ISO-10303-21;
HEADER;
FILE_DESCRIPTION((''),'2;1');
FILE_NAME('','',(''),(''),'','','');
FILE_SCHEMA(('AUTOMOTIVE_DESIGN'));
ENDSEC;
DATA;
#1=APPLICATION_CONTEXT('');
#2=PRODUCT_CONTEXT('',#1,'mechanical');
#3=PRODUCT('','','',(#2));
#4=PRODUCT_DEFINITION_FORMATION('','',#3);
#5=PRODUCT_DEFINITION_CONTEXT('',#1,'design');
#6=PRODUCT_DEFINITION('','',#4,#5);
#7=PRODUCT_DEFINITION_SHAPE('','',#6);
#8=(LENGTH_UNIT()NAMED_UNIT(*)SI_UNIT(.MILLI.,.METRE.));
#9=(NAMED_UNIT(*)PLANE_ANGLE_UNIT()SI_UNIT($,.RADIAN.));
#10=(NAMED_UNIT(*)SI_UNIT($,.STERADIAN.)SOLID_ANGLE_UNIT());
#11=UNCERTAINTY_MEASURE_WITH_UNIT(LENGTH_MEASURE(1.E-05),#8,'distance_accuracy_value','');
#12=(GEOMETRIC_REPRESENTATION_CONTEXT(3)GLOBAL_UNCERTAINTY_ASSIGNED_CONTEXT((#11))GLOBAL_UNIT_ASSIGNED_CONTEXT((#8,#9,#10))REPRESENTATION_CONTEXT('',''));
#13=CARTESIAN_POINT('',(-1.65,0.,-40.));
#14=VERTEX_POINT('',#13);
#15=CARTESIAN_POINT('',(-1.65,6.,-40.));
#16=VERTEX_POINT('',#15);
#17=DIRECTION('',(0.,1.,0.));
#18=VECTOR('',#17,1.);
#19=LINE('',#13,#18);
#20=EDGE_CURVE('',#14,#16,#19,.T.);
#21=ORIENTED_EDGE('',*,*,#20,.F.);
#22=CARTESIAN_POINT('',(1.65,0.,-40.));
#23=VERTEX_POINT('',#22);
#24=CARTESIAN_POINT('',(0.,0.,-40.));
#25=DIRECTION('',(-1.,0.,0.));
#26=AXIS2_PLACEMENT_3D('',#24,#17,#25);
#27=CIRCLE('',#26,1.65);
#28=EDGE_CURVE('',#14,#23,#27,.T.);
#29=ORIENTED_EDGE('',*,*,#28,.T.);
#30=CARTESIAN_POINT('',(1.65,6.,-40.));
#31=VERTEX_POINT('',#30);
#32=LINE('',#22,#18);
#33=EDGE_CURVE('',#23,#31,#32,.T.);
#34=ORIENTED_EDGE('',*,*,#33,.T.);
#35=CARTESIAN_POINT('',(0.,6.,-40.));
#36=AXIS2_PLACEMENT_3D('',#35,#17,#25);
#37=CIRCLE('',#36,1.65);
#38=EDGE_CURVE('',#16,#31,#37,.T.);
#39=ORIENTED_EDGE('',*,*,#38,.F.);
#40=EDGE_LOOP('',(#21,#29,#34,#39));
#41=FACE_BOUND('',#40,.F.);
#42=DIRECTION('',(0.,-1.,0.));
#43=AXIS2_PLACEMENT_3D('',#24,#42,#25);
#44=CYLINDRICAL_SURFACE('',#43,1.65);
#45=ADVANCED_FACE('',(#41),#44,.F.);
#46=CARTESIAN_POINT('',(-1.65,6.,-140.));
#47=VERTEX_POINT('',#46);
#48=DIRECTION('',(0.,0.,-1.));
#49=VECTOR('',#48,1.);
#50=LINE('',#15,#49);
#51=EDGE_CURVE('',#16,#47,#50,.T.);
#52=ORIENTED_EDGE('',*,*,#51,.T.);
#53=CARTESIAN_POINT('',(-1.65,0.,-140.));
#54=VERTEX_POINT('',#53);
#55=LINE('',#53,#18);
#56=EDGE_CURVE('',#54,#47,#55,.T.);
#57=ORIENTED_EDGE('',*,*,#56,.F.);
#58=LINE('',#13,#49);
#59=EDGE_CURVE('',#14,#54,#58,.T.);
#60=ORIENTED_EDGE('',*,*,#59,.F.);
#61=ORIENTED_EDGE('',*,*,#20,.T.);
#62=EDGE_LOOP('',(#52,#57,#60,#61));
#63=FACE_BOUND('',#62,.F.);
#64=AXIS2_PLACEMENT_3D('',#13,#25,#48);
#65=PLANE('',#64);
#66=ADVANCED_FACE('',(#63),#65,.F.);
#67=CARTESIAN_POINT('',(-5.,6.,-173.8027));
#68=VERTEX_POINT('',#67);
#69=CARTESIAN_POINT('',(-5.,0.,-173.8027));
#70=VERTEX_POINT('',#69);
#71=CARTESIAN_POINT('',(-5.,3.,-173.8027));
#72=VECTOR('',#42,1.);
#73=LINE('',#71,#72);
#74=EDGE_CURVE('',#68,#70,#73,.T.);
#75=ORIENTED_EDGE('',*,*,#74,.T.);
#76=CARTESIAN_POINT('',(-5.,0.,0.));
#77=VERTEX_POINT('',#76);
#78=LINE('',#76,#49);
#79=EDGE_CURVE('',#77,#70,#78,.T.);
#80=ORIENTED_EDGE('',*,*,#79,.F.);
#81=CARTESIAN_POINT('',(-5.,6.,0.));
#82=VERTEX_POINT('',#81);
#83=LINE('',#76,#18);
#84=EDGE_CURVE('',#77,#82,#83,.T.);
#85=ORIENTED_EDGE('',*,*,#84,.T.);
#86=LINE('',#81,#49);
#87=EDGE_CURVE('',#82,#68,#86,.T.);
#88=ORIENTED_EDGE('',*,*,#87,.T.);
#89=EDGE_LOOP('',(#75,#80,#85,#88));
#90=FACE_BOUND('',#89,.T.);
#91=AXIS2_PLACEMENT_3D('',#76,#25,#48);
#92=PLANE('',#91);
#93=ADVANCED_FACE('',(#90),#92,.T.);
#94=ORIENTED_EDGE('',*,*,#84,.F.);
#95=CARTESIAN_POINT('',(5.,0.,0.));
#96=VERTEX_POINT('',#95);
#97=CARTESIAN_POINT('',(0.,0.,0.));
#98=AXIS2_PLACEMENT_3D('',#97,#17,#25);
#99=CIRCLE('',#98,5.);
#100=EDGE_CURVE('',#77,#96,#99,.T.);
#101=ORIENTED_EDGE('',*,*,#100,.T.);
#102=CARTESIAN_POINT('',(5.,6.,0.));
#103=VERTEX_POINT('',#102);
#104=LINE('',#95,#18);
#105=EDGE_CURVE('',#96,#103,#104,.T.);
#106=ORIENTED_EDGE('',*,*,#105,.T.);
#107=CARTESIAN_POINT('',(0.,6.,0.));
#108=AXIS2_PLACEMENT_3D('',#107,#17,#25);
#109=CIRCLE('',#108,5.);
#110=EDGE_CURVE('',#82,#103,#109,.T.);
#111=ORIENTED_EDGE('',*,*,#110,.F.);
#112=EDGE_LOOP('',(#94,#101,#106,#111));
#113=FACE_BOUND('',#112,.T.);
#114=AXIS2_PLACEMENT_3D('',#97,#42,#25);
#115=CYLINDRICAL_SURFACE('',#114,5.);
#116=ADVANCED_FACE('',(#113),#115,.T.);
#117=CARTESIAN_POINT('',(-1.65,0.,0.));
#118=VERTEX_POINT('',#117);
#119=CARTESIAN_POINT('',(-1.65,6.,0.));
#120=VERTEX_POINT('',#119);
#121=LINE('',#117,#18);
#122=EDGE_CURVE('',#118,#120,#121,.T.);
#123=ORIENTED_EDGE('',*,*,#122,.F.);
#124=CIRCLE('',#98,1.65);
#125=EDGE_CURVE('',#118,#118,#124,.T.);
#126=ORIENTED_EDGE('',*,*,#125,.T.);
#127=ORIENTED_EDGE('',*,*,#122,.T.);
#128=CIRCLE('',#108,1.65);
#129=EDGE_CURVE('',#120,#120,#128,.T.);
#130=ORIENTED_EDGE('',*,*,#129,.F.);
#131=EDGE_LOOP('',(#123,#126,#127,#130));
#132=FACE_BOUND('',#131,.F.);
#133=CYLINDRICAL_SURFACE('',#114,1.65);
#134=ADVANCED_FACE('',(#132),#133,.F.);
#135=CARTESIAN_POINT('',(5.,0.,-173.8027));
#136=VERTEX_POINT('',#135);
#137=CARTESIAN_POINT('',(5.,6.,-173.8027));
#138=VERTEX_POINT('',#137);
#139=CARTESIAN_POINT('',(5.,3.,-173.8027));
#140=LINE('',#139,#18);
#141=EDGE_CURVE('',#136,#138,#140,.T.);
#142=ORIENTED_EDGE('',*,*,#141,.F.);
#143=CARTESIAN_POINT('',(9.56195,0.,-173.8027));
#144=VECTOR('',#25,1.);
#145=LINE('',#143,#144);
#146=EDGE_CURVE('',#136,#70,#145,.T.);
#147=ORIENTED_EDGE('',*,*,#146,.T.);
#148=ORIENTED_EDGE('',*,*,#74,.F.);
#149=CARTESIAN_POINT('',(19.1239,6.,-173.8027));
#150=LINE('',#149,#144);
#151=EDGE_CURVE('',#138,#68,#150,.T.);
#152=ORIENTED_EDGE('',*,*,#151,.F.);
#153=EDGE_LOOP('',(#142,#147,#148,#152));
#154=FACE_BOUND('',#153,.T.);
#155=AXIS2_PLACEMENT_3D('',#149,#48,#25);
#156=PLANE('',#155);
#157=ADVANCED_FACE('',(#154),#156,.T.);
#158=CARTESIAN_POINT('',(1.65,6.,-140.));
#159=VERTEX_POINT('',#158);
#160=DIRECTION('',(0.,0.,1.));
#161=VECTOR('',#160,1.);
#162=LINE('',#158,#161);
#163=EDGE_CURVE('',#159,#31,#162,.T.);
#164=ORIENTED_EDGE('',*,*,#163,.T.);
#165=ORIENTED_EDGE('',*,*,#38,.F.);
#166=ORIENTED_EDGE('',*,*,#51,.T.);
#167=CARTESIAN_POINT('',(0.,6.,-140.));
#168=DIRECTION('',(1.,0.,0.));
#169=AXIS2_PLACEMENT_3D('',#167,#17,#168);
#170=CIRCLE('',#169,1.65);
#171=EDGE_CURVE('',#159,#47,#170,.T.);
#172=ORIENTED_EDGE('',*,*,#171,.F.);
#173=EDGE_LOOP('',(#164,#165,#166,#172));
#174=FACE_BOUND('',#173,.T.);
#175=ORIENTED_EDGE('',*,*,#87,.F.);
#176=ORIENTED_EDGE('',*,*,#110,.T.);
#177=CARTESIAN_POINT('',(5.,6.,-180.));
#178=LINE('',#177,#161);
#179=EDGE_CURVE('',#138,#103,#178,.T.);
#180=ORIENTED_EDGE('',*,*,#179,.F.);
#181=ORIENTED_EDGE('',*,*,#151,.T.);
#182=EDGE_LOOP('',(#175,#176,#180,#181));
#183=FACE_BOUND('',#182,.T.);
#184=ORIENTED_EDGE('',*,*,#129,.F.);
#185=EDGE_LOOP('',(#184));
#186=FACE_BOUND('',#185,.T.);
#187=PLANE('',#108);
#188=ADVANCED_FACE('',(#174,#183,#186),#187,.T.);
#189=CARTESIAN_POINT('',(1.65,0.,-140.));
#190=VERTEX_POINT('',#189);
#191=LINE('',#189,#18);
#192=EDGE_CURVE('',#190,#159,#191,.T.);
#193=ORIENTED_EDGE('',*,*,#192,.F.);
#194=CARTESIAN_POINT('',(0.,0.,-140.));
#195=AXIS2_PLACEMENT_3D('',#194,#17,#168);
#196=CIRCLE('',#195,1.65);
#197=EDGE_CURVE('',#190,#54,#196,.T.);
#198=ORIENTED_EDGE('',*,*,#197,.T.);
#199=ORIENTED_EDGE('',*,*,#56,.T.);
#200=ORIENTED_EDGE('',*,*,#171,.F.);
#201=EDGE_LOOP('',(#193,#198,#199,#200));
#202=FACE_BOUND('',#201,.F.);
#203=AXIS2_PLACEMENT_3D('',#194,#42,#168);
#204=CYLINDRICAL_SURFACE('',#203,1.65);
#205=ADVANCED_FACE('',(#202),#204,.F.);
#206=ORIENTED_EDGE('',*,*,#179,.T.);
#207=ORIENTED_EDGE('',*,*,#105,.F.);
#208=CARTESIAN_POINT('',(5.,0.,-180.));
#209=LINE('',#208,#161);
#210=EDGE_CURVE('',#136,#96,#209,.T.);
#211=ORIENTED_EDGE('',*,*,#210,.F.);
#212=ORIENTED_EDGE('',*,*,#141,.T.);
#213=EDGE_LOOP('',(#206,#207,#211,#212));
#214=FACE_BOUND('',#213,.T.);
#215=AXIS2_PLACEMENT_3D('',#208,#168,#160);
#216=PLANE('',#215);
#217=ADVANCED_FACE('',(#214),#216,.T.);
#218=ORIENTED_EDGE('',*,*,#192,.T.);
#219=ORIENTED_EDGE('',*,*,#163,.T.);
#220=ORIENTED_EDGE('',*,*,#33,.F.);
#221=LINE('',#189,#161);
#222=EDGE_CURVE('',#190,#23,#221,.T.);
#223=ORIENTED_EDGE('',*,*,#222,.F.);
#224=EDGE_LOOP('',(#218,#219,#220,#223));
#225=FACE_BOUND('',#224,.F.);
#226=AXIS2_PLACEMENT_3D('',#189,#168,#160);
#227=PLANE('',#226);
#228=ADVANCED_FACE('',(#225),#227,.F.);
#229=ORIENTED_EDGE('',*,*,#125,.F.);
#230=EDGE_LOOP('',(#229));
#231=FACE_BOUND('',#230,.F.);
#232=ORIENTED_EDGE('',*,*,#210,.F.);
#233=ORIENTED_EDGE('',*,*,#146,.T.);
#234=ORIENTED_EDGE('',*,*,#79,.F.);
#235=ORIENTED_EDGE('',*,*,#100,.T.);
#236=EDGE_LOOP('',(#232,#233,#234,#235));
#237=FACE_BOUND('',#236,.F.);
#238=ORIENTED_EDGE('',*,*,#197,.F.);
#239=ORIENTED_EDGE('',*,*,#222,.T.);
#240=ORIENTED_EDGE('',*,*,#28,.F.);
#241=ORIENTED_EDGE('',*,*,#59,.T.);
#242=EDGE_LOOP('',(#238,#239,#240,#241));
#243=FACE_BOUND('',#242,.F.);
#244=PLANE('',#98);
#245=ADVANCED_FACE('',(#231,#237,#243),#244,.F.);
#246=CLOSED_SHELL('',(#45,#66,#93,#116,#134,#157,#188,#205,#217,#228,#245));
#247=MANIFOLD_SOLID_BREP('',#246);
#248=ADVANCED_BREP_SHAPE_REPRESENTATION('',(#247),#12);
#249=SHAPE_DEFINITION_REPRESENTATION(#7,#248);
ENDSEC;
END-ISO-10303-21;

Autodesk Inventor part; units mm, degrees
ref_plane "YZ Plane" through (0, 0, 0) normal (1, 0, 0) x (0, 1, 0)
ref_plane "XZ Plane" through (0, 0, 0) normal (0, 1, 0) x (-1, 0, 0)
ref_plane "XY Plane" through (0, 0, 0) normal (0, 0, 1) x (1, 0, 0)
sketch "Sketch1" plane through (0, 0, 0) normal (0, 1, 0) x (-1, 0, 0)
  line L0 (0, 0) -> (0, -180) construction
  line L1 (5, 0) -> (5, -180)
  line L2 (-5, -180) -> (-5, 0)
  arc A0 (5, 0) -> (-5, 0) centre (0, 0) ccw
  arc A1 (-5, -180) -> (5, -180) centre (0, -180) ccw
  circle A2 centre (0, 0) radius 1.65
  line L3 (0, -40) -> (0, -140) construction
  line L4 (1.65, -40) -> (1.65, -140)
  line L5 (-1.65, -140) -> (-1.65, -40)
  arc A3 (1.65, -40) -> (-1.65, -40) centre (0, -40) ccw
  arc A4 (-1.65, -140) -> (1.65, -140) centre (0, -140) ccw
  point P0 (0, -90)
  point P1 (0, -90)
  dimension "d0" = 180
  dimension "d1" = 10
  dimension "d2" = 3.3
  dimension "d3" = 40
  dimension "d5" = 140
  dimension "d6" = 3.3
extrude "Extrusion1" add sketch "Sketch1" along normal blind 6
sketch "Sketch2" plane through (5, 0, 0) normal (1, 0, 0) x (0, 0, -1)
  line L0 (180, 0) -> (180, 6) projected
  line L1 (0, 0) -> (180, 0) projected
  line L2 (180, 0) -> (180, 6) projected
  line L3 (0, 6) -> (180, 6) projected
  line L4 (0, 0) -> (0, 6) projected
  line L5 (180, 0) -> (180, 0) projected
  line L6 (180, 0) -> (180, 6) projected
  line L7 (180, 6) -> (180, 6) projected
  line L8 (180, 0) -> (180, 6) projected
  line L9 (180, 0) -> (0, 0) projected
  arc A0 (498.004, -84) -> (180, 0) centre (180, -643.9437) ccw
  line L10 (180, 6) -> (0, 6) projected
  arc A1 (498.004, -78) -> (180, 6) centre (180, -637.9437) ccw
  line L11 (498.004, -78) -> (498.004, -84)
  line L12 (0, 0) -> (180, 0) projected
  dimension "d9" = 6
  dimension "d10" = 498.004
  dimension "d11" = 90
extrude "Extrusion2" add sketch "Sketch2" against normal blind 10 contours L0 A1 L11 A0
fillet "Fillet1" radius 2 4 edges at (0, -78, -498.004) (5, -81, -498.004) (-5, -81, -498.004) (0, -84, -498.004)
sketch "Sketch3" plane through (0, 6, 0) normal (0, 1, 0) x (1, 0, 0)
  line L0 (-25.1236, -17.4365) -> (19.1239, -17.4365)
  line L1 (19.1239, -17.4365) -> (19.1239, 173.8027)
  line L2 (19.1239, 173.8027) -> (-25.1236, 173.8027)
  line L3 (-25.1236, 173.8027) -> (-25.1236, -17.4365)
  line L4 (-48.0471, -35.7333) -> (42.457, -35.7333)
  line L5 (42.457, -35.7333) -> (42.457, 337.7497)
  line L6 (42.457, 337.7497) -> (-48.0471, 337.7497)
  line L7 (-48.0471, 337.7497) -> (-48.0471, -35.7333)
  line L8 (-102.0639, -92.3443) -> (98.6132, -92.3443)
  line L9 (98.6132, -92.3443) -> (98.6132, 617.9416)
  line L10 (98.6132, 617.9416) -> (-102.0639, 617.9416)
  line L11 (-102.0639, 617.9416) -> (-102.0639, -92.3443)
  point P0 (0, 0)
extrude "Extrusion3" cut sketch "Sketch3" against normal blind 100 contours L7 L6 L5 L4 | L11 L10 L9 L8
properties part number "Part_8_p3"
